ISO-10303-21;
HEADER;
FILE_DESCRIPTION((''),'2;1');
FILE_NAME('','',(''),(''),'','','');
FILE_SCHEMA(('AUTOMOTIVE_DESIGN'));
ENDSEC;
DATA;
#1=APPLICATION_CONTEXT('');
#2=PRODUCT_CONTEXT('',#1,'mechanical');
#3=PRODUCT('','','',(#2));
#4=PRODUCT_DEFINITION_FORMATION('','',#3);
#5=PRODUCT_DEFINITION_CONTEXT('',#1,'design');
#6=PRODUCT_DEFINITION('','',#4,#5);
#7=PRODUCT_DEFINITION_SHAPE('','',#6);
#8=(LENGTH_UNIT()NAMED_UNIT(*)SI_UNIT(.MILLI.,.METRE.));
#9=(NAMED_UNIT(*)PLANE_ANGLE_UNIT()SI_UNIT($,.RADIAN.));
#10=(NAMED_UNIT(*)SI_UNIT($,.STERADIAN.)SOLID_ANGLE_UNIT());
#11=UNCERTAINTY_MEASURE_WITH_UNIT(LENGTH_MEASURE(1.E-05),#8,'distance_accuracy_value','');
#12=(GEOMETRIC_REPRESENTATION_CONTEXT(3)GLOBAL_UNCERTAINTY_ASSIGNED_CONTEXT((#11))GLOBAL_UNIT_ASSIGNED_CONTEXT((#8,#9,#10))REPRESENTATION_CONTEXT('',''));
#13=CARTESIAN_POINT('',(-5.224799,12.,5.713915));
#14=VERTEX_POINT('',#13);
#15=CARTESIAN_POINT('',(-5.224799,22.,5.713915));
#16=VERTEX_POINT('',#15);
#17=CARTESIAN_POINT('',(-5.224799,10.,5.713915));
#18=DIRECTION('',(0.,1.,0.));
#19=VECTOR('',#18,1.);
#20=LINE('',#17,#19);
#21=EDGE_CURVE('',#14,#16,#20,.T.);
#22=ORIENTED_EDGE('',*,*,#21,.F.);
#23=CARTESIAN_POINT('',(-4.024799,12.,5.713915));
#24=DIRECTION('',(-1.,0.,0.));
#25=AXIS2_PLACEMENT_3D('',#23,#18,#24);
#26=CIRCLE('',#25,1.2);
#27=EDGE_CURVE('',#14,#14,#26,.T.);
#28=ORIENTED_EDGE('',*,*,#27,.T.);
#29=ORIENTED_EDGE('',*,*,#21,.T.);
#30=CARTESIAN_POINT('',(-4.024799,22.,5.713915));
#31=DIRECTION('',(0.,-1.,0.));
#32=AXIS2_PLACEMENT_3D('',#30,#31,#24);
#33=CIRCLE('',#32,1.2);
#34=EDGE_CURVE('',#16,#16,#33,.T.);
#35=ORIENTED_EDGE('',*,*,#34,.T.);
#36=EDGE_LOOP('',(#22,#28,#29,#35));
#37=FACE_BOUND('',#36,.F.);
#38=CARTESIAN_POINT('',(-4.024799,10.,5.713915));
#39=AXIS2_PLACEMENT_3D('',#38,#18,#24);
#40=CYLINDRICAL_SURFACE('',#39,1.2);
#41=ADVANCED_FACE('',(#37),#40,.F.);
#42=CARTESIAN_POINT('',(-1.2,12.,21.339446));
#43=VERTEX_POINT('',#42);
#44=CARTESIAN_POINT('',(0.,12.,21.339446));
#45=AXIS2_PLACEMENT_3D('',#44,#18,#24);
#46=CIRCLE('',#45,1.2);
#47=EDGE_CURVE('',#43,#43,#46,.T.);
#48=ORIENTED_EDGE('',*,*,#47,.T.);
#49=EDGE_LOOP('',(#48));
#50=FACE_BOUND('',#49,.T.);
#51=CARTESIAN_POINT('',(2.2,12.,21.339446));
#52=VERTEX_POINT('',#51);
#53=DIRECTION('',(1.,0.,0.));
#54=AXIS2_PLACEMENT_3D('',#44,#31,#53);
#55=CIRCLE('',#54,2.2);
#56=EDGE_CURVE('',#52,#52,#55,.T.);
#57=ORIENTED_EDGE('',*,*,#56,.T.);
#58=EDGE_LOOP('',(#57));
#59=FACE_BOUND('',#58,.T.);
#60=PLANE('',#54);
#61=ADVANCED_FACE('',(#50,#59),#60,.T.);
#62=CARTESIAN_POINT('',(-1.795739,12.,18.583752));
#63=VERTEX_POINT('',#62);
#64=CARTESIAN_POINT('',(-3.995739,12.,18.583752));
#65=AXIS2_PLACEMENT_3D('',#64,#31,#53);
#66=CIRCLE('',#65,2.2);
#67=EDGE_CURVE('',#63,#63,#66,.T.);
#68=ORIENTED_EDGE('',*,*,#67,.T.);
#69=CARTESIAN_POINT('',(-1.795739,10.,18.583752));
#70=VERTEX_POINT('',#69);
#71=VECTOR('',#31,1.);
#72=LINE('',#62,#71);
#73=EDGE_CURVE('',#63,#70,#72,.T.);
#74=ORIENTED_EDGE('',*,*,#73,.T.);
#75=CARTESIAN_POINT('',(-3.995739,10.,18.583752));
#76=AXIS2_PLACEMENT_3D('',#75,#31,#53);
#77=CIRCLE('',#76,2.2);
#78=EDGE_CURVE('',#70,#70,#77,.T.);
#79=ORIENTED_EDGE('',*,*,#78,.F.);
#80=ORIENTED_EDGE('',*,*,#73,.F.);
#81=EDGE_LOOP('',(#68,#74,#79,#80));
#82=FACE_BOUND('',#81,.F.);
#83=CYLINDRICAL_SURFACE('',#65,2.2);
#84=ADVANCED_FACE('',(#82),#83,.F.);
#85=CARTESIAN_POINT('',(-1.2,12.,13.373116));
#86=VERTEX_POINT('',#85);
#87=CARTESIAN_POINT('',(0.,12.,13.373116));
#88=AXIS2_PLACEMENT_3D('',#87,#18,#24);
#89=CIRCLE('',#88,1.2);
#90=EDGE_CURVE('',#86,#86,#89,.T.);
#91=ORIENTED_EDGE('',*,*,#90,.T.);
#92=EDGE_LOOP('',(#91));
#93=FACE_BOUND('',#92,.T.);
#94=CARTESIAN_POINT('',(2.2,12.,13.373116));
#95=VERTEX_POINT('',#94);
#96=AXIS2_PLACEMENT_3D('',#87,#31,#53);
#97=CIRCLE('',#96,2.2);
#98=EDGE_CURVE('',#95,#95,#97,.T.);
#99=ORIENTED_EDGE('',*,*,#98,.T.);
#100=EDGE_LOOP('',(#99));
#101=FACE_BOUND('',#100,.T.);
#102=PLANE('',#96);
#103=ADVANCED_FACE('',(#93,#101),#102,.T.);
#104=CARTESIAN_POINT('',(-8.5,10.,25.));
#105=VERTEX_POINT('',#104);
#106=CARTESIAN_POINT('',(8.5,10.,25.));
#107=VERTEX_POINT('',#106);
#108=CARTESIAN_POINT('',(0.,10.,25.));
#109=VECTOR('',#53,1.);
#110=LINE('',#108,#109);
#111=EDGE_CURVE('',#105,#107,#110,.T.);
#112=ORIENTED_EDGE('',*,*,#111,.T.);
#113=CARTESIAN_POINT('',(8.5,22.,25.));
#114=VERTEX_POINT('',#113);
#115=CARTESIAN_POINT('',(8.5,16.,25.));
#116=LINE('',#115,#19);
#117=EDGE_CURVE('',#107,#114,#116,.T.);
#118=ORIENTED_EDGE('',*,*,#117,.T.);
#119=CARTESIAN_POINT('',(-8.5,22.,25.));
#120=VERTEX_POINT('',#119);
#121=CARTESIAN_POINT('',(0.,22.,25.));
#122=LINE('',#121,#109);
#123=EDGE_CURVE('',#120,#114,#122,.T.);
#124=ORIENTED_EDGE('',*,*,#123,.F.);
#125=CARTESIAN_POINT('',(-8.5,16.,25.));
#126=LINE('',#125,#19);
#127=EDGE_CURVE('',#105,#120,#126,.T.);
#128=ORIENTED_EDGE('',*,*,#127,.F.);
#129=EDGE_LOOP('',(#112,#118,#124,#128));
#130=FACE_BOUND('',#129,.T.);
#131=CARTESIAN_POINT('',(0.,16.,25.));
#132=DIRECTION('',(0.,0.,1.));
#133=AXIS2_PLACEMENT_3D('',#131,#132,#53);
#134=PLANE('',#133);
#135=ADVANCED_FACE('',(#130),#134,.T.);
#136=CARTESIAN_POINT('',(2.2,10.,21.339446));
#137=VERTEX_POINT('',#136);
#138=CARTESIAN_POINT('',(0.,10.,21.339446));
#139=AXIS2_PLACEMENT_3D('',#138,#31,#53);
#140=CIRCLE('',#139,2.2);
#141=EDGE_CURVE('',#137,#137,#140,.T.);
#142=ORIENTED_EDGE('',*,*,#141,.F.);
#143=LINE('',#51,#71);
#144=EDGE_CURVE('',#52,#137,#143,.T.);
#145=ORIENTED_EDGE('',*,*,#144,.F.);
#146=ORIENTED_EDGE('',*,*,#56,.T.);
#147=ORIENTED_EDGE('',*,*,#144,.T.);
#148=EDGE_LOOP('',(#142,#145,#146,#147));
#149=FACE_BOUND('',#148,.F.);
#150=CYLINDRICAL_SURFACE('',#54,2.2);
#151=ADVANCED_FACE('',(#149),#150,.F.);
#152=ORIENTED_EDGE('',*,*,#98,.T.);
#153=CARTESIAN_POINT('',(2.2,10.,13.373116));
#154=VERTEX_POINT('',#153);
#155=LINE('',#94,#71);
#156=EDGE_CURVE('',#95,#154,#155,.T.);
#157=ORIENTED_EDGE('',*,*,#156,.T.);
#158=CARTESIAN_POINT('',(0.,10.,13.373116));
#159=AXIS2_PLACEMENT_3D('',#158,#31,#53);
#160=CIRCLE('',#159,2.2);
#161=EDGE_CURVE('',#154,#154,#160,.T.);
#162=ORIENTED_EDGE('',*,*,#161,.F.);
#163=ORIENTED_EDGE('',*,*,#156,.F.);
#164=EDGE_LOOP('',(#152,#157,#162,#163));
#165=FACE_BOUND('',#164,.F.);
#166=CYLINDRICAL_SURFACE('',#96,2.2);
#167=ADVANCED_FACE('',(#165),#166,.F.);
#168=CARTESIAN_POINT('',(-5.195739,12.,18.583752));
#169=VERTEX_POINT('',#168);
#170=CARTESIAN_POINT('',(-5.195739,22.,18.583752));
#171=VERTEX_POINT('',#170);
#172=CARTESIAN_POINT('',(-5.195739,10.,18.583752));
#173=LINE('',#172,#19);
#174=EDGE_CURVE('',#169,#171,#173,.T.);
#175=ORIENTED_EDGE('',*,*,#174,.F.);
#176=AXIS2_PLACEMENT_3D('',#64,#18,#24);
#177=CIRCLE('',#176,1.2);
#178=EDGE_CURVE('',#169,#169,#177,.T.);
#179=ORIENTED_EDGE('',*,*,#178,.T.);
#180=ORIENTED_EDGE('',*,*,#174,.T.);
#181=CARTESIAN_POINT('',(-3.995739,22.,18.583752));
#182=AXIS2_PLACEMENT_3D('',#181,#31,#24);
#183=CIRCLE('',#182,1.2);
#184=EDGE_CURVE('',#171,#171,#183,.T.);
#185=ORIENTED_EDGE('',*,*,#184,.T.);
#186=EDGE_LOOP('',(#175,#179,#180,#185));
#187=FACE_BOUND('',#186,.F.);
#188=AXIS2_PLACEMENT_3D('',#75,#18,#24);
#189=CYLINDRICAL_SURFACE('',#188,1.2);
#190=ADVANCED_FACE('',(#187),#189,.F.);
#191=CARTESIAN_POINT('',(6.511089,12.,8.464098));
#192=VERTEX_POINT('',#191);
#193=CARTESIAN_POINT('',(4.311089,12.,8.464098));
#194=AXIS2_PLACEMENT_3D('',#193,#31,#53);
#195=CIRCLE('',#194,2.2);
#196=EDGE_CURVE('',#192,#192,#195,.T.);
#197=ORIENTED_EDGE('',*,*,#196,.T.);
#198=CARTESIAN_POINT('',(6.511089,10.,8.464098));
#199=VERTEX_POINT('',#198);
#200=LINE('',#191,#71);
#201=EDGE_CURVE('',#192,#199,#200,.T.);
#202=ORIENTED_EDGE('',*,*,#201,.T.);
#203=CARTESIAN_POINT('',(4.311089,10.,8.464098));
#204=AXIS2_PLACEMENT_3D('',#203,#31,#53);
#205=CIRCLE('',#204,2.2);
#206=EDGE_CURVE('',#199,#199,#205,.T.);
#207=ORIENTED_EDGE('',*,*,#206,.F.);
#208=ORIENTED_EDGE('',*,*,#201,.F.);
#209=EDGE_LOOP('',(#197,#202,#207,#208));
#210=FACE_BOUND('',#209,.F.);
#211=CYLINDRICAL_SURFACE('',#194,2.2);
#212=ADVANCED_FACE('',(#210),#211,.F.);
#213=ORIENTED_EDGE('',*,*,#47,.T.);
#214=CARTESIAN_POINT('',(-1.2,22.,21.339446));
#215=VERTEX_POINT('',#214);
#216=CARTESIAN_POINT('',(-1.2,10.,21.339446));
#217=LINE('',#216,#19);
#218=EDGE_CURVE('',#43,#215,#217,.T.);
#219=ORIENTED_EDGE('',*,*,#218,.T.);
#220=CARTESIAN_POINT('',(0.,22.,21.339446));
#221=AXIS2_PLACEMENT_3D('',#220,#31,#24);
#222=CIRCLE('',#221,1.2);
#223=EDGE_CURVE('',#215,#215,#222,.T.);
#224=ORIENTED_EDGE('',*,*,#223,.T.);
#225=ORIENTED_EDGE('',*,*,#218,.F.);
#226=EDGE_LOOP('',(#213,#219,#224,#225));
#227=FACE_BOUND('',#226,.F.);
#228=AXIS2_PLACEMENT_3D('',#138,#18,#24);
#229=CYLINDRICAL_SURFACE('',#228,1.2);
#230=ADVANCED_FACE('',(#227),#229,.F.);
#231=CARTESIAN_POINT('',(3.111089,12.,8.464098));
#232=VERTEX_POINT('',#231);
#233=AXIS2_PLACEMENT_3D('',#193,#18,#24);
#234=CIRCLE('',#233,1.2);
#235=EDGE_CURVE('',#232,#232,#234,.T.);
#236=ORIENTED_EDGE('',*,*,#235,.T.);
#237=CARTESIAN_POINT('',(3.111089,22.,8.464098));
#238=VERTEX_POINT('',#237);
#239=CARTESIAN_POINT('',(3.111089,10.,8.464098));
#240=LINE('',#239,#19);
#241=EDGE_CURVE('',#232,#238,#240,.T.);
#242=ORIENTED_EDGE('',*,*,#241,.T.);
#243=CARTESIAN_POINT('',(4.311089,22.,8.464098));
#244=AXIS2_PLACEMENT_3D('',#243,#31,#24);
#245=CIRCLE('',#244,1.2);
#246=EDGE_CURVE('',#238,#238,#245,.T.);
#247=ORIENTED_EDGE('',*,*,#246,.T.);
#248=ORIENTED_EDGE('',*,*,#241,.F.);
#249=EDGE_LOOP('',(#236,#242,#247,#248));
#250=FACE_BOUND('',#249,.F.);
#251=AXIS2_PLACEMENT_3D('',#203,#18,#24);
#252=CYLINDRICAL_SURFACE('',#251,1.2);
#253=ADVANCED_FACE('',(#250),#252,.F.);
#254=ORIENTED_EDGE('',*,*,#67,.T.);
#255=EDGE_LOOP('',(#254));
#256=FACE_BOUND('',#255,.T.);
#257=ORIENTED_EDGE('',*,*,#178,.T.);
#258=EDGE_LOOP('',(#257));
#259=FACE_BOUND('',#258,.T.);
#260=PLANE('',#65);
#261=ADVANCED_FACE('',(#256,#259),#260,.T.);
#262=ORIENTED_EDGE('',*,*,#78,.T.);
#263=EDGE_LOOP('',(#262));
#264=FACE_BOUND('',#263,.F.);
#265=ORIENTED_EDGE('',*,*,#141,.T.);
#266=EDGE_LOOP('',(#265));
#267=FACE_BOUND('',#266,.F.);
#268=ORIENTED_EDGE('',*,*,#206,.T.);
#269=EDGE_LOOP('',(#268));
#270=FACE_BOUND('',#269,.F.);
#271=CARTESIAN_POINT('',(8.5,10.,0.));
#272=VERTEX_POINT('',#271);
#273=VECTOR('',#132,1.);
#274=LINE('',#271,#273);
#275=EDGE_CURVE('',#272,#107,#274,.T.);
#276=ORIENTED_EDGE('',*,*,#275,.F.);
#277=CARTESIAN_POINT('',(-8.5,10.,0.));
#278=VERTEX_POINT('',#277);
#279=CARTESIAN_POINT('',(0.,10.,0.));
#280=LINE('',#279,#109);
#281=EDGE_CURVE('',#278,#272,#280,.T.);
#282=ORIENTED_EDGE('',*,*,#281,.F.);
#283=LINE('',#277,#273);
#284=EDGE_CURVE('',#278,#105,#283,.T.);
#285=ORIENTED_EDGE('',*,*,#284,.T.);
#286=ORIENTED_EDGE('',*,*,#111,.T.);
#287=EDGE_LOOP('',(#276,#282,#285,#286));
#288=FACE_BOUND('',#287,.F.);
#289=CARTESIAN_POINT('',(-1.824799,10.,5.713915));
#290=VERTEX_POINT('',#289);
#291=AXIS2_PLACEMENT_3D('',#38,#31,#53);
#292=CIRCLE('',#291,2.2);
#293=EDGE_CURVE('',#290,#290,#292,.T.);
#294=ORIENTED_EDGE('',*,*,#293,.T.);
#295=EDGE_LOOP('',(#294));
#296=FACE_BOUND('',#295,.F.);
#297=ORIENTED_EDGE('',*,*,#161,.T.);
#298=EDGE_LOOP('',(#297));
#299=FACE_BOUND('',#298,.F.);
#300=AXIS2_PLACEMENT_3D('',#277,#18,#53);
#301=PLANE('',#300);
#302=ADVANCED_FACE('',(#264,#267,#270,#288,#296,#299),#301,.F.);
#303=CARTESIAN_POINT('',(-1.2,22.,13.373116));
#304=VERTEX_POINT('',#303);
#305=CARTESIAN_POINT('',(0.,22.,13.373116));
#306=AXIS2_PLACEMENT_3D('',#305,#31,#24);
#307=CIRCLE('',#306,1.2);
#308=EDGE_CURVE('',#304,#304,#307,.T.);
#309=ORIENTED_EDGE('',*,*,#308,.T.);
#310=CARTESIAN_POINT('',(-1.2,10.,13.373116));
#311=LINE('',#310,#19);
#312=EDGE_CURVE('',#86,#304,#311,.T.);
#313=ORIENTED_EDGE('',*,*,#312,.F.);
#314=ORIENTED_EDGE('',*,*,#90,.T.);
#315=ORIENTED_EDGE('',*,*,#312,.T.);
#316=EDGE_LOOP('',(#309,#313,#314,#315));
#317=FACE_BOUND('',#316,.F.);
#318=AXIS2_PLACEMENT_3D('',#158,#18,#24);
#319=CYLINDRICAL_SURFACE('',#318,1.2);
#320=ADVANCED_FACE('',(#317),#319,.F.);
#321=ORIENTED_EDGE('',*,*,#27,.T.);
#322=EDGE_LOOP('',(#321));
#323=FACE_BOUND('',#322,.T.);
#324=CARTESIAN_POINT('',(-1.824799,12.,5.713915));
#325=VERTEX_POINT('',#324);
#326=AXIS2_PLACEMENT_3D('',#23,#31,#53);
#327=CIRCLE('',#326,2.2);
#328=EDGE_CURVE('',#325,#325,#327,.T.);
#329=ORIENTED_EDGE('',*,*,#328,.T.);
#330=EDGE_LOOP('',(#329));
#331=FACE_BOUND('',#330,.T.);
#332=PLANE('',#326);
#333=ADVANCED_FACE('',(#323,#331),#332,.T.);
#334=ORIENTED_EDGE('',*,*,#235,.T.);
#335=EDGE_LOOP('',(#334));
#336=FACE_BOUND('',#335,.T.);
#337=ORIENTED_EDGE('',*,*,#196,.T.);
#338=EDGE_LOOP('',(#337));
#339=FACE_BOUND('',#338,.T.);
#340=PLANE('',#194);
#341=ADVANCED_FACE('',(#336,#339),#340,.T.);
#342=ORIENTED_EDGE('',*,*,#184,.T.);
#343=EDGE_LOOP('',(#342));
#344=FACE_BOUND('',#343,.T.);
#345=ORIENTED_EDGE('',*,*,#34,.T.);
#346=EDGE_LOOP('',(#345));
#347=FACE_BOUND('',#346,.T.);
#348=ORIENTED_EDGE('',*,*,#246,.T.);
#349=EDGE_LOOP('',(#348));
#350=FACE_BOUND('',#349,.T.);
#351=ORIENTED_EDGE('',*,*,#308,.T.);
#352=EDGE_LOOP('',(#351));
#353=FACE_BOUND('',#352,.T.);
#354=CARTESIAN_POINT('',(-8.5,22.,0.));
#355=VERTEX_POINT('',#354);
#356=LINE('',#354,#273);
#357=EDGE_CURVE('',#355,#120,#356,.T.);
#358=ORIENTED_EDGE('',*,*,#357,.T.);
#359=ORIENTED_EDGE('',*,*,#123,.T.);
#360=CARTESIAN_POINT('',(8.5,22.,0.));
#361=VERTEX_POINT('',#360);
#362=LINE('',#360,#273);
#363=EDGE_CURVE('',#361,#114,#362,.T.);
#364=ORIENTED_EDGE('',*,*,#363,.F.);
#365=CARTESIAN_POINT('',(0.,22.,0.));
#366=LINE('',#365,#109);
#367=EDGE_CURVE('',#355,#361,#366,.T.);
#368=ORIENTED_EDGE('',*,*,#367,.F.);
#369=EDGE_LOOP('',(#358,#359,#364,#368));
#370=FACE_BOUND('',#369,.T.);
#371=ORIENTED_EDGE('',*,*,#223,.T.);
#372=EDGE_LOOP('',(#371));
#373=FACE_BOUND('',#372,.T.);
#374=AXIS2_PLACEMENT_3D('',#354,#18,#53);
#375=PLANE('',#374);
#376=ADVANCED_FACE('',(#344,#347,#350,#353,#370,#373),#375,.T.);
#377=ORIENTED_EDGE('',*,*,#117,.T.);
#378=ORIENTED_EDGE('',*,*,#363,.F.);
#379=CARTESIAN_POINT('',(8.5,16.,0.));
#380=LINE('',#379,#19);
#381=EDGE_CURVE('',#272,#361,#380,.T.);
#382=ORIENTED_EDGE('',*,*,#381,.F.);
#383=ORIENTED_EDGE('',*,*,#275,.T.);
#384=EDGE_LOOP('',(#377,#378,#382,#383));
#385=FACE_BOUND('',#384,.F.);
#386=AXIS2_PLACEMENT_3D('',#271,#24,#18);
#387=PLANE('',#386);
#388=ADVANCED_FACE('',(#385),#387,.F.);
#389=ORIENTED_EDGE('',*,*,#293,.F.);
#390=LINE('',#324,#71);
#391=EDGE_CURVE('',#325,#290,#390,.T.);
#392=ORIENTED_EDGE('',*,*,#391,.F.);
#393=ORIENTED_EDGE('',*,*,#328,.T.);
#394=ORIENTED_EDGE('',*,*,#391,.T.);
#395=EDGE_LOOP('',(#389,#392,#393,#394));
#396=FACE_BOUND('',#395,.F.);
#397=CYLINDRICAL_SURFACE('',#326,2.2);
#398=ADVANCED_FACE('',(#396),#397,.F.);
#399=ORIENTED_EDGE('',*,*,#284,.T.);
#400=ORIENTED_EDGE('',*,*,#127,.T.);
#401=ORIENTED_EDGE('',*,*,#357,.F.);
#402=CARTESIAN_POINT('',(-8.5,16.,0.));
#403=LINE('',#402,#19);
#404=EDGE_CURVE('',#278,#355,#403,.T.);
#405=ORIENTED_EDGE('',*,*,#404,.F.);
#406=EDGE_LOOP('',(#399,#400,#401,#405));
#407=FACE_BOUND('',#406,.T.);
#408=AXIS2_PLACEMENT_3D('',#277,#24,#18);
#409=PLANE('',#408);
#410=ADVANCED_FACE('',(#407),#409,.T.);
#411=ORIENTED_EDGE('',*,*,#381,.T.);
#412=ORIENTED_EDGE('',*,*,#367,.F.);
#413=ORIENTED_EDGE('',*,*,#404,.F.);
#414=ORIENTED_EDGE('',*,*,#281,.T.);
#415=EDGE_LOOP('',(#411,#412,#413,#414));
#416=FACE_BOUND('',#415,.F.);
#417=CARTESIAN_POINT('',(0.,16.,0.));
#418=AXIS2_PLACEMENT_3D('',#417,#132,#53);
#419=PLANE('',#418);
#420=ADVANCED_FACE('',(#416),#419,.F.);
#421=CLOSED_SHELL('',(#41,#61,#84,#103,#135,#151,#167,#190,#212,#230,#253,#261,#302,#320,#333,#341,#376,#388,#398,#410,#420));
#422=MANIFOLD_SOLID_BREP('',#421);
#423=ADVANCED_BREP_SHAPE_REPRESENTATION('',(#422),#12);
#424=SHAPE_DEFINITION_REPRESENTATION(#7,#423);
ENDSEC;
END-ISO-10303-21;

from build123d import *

# Parameters (mm, degrees)
F2_W           = 17
F2_H           = 12
F3_DEPTH       = 25
F5_D           = 2.4
F5_DEPTH       = 12
F5_CBORE_D     = 4.4
F5_CBORE_DEPTH = 2
F5_TIP         = 0.7210327428


# Not quite as in the source:
# - the program builds the solid bodies; features that only make, move or delete a surface that nothing else refers to are left out


with BuildPart() as f3:
    # F2 (on Top) → F3 (new body)
    with BuildSketch(Plane.XY):
        with Locations((0, 16)):
            Rectangle(F2_W, F2_H)
    extrude(amount=F3_DEPTH)

    # F5
    with Locations(Plane.XZ.offset(-10)):
        with Locations((-3.9957389235, 18.5837522149), (0, 21.3394463062), (0, 13.3731160313), (4.3110894039, 8.4640979767), (-4.0247985162, 5.713914521)):
            CounterBoreHole(F5_D / 2, F5_CBORE_D / 2, F5_CBORE_DEPTH, depth=F5_DEPTH)
            with Locations((0, 0, -(F5_DEPTH + F5_TIP / 2))):  # 118° drill point
                Cone(0, F5_D / 2, F5_TIP, mode=Mode.SUBTRACT)


solid = f3.part
